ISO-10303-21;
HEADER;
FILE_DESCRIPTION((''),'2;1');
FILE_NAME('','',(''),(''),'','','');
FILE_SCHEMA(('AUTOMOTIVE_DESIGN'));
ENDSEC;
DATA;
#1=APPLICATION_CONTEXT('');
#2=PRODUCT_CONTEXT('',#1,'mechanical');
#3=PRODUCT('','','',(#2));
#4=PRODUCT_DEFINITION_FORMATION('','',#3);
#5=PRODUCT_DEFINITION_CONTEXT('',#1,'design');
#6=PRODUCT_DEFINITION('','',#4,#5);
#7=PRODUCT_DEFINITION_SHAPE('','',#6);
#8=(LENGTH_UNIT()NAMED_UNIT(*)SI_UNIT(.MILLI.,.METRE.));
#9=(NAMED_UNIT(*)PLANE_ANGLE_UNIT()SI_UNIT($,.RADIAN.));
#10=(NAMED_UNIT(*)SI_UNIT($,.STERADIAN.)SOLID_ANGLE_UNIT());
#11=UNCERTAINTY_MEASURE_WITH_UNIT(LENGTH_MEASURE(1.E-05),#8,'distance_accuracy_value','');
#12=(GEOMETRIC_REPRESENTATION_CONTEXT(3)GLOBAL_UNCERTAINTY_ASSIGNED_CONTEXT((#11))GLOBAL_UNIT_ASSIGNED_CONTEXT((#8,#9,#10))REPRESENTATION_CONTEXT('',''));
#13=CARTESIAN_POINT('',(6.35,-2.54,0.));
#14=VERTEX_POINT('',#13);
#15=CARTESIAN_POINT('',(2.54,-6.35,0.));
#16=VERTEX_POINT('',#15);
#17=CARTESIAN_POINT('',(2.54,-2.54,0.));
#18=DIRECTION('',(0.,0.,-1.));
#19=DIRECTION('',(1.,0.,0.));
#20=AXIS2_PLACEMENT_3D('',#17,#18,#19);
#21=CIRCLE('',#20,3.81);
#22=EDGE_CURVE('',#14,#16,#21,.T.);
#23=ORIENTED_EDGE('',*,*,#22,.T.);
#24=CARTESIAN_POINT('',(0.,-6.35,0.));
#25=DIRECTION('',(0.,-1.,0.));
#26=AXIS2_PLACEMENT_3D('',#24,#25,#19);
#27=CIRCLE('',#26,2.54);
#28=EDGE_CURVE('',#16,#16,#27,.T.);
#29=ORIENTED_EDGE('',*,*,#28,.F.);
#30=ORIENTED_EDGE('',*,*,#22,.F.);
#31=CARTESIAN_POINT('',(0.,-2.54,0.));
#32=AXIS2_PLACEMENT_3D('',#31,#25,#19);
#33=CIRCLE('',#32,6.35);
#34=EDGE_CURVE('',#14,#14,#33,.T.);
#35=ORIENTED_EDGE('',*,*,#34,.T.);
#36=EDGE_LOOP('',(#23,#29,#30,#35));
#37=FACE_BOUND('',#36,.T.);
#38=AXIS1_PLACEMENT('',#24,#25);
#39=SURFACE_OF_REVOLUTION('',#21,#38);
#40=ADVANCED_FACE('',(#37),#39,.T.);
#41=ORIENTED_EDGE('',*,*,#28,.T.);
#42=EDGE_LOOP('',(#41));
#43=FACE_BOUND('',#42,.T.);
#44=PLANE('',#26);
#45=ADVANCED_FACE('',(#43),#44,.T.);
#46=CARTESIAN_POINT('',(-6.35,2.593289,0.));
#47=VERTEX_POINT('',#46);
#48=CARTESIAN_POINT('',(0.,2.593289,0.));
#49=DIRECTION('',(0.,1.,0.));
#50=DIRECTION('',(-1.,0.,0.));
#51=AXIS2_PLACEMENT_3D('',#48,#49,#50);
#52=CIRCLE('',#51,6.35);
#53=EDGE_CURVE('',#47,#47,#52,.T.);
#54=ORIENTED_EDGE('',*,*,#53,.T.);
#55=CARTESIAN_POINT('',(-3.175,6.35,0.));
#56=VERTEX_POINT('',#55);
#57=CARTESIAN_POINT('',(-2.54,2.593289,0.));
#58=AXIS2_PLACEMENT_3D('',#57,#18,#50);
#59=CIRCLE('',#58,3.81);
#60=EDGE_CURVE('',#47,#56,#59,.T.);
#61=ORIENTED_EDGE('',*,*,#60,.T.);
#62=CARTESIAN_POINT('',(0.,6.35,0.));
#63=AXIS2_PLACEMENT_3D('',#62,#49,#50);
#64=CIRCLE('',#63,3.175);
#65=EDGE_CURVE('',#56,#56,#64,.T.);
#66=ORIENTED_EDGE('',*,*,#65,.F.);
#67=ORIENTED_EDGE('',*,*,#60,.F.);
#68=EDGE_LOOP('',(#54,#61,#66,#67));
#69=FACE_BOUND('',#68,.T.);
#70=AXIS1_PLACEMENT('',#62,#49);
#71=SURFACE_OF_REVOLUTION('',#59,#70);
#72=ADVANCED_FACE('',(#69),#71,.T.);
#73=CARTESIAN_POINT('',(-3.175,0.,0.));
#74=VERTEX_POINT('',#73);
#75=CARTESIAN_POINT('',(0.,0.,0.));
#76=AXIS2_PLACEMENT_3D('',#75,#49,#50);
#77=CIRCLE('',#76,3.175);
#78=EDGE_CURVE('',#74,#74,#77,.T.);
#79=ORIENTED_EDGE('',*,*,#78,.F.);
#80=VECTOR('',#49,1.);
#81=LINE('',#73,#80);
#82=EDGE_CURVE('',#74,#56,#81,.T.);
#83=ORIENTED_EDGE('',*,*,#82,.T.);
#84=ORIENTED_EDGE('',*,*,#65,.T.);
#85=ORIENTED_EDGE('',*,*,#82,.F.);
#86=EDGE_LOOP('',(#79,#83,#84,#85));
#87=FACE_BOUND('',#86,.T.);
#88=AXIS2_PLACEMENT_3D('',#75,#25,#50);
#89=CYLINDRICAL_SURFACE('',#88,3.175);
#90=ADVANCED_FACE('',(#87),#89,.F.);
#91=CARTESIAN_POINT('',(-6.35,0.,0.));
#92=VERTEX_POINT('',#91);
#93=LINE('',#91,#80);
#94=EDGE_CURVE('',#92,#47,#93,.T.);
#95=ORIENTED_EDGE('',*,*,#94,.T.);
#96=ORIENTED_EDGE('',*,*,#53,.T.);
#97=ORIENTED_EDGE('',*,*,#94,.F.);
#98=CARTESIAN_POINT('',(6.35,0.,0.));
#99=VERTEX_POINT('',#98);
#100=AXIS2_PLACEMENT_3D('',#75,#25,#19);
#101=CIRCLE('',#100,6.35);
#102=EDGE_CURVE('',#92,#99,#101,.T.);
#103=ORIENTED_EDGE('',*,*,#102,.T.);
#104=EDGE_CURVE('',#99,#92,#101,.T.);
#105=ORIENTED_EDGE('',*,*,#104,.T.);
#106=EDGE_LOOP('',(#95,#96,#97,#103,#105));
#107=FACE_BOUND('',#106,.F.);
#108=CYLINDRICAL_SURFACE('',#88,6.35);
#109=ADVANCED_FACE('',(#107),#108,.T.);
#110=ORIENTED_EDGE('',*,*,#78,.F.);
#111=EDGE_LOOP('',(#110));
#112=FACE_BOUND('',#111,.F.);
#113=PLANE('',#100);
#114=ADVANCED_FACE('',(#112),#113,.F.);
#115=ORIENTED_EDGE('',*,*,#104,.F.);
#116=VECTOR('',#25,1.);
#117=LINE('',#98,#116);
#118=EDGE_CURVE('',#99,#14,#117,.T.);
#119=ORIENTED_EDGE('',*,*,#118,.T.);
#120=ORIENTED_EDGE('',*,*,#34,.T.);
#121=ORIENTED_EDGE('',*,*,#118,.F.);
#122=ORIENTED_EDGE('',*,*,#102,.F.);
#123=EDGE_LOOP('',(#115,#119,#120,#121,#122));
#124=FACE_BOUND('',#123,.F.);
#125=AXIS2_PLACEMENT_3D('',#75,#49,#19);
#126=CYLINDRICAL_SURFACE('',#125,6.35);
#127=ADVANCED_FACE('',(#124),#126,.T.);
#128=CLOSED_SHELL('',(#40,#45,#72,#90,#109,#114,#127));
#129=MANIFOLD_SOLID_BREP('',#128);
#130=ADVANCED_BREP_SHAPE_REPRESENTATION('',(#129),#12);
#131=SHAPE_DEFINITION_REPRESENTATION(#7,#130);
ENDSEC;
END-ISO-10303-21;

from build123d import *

# Parameters (mm, degrees)
F0_R     = 6.35
F1_DEPTH = 6.35
F2_R     = 6.35
F2_R_2   = 3.175
F3_DEPTH = 6.35


# Not quite as in the source:
# - a fillet or chamfer that OpenCascade refuses, or shapes differently, is made with other operations: its cross-section is extruded or revolved along the edge and cut away or added


with BuildPart() as f1:
    # F0 (on Front) → F1 (new body)
    with BuildSketch(Plane.XZ):
        Circle(F0_R)
    extrude(amount=F1_DEPTH)

    # F2 (on face) → F3 (join)
    with BuildSketch(Plane(origin=(0, 0, 0), x_dir=(-1, 0, 0), z_dir=(0, 1, 0))):
        Circle(F2_R)
        Circle(F2_R_2, mode=Mode.SUBTRACT)
    extrude(amount=F3_DEPTH)

    # F4: fillet of radius 3.81 on 2 edges, made by hand

    # F4_s1 → F4_t2 (revolve, cut)
    with BuildSketch(Plane.XY):
        with BuildLine():
            ThreePointArc((-6.35, 2.5932893377), (-5.4499355663, 5.0526337626), (-3.175, 6.35))
            Line((-3.175, 6.35), (-6.35, 6.35))
            Line((-6.35, 6.35), (-6.35, 2.5932893377))
        make_face()
    revolve(axis=Axis((0, 6.35, 0), (0, 1, 0)), mode=Mode.SUBTRACT)

    # F4_s3 → F4_t4 (revolve, cut)
    with BuildSketch(Plane.XY):
        with BuildLine():
            ThreePointArc((6.35, -2.54), (5.2340768363, -5.2340768363), (2.54, -6.35))
            Line((2.54, -6.35), (6.35, -6.35))
            Line((6.35, -6.35), (6.35, -2.54))
        make_face()
    revolve(axis=Axis((0, -6.35, 0), (0, -1, 0)), mode=Mode.SUBTRACT)


solid = f1.part
